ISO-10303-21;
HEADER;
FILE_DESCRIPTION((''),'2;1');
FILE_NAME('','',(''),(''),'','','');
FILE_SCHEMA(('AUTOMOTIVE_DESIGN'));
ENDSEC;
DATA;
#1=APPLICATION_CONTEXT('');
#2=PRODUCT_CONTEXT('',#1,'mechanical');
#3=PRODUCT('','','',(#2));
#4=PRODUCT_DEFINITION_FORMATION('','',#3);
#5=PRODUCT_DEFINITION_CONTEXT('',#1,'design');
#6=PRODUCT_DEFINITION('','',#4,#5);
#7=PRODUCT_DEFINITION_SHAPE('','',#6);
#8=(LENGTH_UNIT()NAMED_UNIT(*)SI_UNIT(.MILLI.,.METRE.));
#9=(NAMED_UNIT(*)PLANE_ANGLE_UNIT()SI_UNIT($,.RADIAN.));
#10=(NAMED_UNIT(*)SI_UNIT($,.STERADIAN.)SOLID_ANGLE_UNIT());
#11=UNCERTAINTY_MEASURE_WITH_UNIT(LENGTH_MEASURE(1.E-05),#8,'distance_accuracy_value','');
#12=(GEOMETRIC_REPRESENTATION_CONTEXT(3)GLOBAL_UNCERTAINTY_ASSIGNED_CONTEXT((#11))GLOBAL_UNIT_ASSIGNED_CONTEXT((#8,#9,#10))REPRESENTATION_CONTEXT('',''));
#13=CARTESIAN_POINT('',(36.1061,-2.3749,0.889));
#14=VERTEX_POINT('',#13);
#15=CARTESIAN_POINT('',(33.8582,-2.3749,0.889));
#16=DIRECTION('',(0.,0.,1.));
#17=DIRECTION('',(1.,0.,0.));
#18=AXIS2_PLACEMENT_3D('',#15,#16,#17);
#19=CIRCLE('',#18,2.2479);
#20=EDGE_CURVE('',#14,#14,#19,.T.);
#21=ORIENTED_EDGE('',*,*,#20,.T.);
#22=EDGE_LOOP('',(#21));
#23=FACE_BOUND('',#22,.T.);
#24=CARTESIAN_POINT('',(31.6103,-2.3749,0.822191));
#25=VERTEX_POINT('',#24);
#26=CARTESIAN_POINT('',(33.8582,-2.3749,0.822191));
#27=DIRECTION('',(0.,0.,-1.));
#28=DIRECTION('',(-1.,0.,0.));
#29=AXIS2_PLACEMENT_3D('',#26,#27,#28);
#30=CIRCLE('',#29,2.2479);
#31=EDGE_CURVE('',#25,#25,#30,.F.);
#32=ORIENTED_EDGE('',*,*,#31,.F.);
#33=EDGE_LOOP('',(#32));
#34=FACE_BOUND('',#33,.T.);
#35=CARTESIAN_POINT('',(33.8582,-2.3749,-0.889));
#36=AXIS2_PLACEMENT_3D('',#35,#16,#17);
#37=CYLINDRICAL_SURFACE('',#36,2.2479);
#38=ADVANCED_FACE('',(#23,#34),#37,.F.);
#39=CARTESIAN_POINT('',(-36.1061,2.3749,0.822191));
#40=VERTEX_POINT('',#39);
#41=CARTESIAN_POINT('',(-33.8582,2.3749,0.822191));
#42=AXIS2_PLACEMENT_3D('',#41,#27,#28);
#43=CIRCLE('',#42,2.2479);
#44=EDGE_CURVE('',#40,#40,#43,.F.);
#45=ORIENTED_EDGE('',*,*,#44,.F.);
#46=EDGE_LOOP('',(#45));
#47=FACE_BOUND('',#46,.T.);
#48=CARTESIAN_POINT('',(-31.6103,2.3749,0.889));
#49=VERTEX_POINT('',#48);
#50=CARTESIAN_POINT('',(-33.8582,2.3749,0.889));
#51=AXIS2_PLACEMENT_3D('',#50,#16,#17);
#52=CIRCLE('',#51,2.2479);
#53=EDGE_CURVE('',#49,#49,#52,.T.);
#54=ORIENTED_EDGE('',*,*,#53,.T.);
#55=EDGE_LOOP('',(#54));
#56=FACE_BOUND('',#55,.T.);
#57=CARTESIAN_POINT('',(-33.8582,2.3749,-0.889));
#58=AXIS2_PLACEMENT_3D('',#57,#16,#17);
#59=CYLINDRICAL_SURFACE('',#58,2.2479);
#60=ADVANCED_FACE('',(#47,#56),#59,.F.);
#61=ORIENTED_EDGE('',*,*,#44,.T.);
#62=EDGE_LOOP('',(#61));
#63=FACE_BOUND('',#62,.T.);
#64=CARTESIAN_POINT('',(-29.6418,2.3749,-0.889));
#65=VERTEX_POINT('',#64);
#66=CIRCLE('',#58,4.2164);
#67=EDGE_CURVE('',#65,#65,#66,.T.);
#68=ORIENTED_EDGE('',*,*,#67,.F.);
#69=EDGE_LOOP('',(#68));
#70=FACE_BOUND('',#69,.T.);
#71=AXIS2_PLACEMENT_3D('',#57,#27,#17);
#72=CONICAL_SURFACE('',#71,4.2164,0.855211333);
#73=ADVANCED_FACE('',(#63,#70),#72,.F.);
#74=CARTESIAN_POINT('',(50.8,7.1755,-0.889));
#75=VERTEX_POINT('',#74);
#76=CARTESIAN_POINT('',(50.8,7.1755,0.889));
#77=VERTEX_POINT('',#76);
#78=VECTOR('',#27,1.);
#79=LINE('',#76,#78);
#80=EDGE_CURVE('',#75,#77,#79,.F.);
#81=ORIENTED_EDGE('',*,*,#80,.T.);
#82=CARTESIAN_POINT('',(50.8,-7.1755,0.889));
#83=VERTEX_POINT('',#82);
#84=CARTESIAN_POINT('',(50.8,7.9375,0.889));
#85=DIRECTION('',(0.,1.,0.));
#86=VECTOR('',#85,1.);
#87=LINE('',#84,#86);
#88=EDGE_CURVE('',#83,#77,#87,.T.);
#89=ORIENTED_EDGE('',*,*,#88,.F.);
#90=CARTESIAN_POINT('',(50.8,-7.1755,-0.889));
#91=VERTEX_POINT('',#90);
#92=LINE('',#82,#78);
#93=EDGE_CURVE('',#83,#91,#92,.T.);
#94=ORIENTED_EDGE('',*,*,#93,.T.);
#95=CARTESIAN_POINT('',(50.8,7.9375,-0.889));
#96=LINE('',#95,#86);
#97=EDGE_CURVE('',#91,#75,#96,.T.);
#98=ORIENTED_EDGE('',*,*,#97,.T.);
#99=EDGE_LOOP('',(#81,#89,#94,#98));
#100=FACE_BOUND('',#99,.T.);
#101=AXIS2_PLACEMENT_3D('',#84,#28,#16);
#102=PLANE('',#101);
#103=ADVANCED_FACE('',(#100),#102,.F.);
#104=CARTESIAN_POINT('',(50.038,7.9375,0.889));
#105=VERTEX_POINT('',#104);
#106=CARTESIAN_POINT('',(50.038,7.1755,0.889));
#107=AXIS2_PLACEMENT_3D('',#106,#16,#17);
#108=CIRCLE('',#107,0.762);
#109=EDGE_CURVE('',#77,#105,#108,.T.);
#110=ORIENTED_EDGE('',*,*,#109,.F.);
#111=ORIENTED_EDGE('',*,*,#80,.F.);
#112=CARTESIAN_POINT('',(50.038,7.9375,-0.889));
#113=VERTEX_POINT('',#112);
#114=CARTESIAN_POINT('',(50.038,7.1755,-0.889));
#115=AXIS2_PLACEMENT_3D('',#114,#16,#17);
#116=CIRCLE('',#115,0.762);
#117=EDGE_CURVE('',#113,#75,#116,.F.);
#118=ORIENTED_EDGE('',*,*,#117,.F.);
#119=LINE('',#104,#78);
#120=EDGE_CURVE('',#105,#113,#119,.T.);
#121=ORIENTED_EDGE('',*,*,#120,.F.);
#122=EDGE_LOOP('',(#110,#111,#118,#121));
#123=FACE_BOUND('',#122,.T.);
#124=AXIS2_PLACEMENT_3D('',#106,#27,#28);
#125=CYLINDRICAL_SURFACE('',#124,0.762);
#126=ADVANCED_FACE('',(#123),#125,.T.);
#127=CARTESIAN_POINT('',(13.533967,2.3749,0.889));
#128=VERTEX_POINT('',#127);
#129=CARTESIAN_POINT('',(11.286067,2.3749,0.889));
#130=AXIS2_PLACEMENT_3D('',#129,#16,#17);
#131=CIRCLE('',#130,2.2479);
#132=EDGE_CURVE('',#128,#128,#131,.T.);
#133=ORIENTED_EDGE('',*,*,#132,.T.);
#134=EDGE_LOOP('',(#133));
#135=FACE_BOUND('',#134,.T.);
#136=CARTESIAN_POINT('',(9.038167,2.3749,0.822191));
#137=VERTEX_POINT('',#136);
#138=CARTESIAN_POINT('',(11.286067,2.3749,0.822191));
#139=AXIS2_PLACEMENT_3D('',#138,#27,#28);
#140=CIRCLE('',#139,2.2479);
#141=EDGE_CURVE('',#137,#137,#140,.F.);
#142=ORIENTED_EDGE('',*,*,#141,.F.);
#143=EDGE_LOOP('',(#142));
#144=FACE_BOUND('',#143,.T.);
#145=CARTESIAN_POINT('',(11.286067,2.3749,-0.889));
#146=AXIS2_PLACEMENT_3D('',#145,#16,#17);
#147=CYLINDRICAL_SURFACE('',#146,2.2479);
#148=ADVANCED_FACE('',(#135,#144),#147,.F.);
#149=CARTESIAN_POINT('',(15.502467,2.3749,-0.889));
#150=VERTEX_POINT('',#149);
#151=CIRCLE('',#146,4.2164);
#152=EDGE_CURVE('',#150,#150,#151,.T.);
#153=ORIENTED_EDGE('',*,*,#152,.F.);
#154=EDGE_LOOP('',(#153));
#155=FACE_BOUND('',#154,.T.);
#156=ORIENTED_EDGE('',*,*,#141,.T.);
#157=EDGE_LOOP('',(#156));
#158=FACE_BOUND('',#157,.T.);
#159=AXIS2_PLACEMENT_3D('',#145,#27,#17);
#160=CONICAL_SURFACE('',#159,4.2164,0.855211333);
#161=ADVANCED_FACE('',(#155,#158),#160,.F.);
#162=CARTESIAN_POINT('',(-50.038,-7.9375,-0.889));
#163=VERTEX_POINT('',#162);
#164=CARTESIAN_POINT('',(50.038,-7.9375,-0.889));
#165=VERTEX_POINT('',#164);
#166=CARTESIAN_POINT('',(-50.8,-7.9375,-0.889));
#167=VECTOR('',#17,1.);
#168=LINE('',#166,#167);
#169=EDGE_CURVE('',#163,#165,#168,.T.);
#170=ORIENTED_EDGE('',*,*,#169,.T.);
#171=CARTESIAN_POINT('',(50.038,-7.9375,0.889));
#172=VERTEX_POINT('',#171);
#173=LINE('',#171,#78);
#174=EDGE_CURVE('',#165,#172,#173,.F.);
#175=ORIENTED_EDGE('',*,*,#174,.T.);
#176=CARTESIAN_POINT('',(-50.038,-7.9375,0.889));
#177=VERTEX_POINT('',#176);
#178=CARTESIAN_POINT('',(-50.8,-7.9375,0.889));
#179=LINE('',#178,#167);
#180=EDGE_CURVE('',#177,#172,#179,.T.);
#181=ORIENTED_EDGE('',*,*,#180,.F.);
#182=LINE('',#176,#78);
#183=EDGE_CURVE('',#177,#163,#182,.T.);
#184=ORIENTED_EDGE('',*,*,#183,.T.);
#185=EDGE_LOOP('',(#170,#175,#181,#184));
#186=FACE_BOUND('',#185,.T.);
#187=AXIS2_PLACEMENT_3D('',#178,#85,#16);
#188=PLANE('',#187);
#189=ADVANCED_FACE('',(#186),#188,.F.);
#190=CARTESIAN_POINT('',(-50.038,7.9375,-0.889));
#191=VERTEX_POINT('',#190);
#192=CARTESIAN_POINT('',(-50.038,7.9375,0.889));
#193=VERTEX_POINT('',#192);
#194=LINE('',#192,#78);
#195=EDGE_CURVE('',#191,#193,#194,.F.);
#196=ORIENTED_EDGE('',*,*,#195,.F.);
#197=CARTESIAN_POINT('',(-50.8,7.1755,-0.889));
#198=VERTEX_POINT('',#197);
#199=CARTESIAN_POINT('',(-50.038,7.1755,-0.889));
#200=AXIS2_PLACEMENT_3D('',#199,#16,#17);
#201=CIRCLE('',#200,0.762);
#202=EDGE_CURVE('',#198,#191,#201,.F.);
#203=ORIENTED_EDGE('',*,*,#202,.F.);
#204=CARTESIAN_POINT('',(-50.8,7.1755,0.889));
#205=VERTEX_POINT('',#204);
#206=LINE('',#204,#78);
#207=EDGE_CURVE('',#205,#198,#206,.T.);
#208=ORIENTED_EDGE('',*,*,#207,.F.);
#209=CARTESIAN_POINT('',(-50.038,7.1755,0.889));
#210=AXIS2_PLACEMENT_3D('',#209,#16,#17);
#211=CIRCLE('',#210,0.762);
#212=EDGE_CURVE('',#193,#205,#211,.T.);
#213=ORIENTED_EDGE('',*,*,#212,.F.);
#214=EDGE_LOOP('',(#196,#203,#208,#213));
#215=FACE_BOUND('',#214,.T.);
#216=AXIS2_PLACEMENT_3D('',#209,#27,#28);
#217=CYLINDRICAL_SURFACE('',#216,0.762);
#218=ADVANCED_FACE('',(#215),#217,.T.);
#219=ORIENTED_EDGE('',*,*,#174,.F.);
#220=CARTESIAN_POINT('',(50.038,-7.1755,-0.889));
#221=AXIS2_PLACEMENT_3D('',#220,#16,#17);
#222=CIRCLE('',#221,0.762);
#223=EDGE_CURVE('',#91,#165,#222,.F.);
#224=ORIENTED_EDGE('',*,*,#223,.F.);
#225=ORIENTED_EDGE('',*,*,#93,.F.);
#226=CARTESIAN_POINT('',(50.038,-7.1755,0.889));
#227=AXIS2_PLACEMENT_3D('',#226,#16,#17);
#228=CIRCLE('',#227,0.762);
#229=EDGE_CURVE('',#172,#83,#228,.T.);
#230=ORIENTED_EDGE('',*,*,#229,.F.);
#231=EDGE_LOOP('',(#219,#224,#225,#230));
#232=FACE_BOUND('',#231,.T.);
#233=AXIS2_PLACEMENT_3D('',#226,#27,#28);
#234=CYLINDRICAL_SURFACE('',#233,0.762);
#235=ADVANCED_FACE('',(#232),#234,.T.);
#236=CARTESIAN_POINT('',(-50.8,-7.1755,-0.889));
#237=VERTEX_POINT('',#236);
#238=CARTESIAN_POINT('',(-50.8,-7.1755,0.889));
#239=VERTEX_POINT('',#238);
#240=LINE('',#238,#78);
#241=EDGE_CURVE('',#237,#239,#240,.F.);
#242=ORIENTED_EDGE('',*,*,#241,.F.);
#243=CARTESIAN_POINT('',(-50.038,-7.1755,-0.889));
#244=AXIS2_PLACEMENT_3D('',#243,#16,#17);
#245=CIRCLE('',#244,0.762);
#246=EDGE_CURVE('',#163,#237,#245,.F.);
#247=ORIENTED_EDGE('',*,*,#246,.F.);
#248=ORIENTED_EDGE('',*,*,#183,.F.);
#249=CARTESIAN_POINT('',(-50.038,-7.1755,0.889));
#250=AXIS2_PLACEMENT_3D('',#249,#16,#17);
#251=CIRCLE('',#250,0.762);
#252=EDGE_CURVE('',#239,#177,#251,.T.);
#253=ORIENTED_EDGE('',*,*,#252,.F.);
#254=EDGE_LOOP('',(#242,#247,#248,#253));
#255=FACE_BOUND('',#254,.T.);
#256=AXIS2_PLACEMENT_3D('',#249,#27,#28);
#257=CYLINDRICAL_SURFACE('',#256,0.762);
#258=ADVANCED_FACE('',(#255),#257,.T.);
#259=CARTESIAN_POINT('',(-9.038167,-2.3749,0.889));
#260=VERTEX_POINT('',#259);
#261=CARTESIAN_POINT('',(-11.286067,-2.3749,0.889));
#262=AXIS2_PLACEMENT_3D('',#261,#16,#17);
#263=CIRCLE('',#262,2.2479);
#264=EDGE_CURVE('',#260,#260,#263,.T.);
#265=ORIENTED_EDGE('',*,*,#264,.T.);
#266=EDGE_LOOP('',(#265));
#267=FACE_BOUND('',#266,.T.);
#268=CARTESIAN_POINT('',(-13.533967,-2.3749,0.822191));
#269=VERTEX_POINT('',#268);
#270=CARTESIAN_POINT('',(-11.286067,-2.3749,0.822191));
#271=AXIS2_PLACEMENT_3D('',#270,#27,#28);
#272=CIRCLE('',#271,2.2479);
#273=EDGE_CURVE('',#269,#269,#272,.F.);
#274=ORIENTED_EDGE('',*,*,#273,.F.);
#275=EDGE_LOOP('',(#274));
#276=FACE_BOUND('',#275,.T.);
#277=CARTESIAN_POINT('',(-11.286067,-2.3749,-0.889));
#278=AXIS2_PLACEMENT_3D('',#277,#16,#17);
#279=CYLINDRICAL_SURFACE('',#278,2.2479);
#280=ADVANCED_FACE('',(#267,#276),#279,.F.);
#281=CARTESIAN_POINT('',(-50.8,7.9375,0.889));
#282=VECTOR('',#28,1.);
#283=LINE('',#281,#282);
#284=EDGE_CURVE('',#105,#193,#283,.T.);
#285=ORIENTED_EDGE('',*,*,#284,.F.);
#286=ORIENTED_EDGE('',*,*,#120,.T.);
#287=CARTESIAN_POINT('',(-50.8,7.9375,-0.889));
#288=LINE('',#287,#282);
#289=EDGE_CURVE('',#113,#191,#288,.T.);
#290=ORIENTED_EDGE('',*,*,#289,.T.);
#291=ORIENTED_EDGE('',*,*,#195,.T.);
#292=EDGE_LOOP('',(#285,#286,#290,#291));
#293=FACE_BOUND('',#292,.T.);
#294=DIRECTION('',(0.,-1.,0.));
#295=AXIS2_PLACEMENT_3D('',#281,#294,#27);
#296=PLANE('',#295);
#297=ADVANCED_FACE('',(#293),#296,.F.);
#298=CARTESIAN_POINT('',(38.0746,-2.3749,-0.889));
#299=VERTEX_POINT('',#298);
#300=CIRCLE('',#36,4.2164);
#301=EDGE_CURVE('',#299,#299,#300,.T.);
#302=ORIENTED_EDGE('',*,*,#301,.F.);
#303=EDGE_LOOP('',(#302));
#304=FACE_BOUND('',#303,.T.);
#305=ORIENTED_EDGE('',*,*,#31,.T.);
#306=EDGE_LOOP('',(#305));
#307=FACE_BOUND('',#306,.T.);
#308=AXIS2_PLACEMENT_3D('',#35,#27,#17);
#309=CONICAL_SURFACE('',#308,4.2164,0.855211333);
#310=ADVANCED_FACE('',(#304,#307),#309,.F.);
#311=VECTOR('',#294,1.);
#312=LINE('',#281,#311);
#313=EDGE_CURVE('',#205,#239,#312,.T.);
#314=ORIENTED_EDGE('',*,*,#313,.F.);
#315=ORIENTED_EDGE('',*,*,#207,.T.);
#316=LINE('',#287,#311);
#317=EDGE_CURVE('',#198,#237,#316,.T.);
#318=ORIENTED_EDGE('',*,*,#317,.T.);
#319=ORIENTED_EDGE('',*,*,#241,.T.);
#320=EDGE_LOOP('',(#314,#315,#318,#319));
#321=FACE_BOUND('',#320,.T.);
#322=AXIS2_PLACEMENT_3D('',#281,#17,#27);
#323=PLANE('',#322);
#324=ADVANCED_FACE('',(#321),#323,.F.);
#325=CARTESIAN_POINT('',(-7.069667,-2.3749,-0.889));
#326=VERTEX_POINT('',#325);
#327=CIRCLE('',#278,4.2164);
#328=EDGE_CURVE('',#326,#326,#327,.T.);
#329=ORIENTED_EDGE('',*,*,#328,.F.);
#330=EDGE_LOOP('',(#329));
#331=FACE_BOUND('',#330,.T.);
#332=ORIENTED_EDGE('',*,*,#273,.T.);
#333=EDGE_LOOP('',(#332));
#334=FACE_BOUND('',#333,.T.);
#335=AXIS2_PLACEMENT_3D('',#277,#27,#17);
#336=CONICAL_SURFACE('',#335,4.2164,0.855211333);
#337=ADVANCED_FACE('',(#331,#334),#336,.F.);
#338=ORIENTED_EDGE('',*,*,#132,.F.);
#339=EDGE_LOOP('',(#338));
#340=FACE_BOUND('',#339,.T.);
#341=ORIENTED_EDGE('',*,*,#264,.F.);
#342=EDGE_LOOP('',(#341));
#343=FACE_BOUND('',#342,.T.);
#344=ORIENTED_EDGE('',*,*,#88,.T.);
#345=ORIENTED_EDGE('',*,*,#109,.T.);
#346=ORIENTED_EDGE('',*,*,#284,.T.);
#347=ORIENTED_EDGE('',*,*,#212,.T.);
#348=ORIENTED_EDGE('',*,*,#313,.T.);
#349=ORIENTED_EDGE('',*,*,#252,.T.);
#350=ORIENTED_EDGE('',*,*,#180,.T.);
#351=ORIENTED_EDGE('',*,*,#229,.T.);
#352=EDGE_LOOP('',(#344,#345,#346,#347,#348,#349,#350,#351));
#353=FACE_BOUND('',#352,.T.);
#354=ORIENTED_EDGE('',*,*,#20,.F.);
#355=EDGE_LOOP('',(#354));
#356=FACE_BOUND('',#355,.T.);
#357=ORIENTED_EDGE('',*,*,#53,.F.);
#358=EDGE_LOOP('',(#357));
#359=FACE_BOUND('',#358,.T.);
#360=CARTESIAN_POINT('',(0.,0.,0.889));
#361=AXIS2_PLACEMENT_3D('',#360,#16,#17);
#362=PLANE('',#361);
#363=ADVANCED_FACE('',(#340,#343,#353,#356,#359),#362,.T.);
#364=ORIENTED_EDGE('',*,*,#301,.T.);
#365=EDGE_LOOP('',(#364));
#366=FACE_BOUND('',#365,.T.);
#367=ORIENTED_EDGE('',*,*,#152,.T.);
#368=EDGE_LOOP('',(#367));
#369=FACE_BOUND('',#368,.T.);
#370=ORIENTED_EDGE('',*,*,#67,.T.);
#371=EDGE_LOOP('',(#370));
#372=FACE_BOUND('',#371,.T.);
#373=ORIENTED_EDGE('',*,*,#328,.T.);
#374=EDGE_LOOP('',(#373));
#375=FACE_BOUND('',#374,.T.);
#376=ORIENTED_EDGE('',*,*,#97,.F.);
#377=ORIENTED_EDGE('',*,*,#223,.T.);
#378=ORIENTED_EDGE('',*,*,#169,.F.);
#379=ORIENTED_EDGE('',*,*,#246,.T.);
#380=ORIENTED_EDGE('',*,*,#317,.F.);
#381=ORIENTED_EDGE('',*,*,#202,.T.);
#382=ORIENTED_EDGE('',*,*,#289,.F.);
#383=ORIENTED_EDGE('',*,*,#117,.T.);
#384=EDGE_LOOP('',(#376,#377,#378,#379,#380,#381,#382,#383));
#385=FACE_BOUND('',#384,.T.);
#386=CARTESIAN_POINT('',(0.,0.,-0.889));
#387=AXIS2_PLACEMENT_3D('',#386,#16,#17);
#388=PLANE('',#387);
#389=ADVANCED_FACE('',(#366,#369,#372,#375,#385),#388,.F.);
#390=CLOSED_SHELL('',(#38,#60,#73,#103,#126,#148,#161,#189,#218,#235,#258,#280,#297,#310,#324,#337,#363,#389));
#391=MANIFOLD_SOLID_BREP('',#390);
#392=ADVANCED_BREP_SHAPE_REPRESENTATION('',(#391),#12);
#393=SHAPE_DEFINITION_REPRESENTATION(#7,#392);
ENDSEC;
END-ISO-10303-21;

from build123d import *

# Parameters (mm, degrees)
BOSS_EXTRUDE1_DEPTH      = 0.889
BOSS_EXTRUDE1_DEPTH_BACK = 0.889
SKETCH4_W                = 101.6
SKETCH4_H                = 15.875
SKETCH5_R                = 2.2479
CUT_EXTRUDE1_DEPTH       = 52.424062726
SKETCH6_R                = 4.2164
CUT_EXTRUDE2_DEPTH       = 52.447110611
CUT_EXTRUDE2_TAPER       = 49
FILLET1_R                = 0.762


# Read off the part's stored shape, not the designer's step: Sketch-Pattern1
with BuildPart() as part:
    # Sketch4 → Boss-Extrude1 (new, two sides: drawn at the far end of the back side and taken through both)
    with BuildSketch(Plane.XY.offset(-BOSS_EXTRUDE1_DEPTH_BACK)):
        Rectangle(SKETCH4_W, SKETCH4_H)
    extrude(amount=BOSS_EXTRUDE1_DEPTH + BOSS_EXTRUDE1_DEPTH_BACK)

    # Sketch5 → Cut-Extrude1 (cut, symmetric)
    with BuildSketch(Plane.XY):
        with Locations((-33.8582, 2.3749)):
            Circle(SKETCH5_R)
    extrude(amount=CUT_EXTRUDE1_DEPTH, both=True, mode=Mode.SUBTRACT)

    # Sketch6 → Cut-Extrude2 (cut, through all)
    with BuildSketch(Plane.XY.offset(-0.889)):
        with Locations((-33.8582, 2.3749)):
            Circle(SKETCH6_R)
    extrude(amount=CUT_EXTRUDE2_DEPTH, taper=CUT_EXTRUDE2_TAPER, mode=Mode.SUBTRACT)

    # Sketch-Pattern1 outline → Sketch-Pattern1 (revolve, cut)
    with BuildSketch(Plane(origin=(11.286066667, 2.3749, 0), x_dir=(1, 0, 0), z_dir=(0, -1, 0))):
        Polygon((0, -0.889), (4.2164, -0.889), (2.2479, 0.822190943), (2.2479, 0.889), (0, 0.889), align=None)
    revolve(axis=Axis((11.286066667, 2.3749, 0), (0, 0, 1)), mode=Mode.SUBTRACT)

    # Sketch-Pattern1 2 outline → Sketch-Pattern1 2 (revolve, cut)
    with BuildSketch(Plane(origin=(33.8582, -2.3749, 0), x_dir=(1, 0, 0), z_dir=(0, -1, 0))):
        Polygon((0, -0.889), (4.2164, -0.889), (2.2479, 0.822190943), (2.2479, 0.889), (0, 0.889), align=None)
    revolve(axis=Axis((33.8582, -2.3749, 0), (0, 0, 1)), mode=Mode.SUBTRACT)

    # Sketch-Pattern1 3 outline → Sketch-Pattern1 3 (revolve, cut)
    with BuildSketch(Plane(origin=(-11.286066667, -2.3749, 0), x_dir=(1, 0, 0), z_dir=(0, -1, 0))):
        Polygon((0, -0.889), (4.2164, -0.889), (2.2479, 0.822190943), (2.2479, 0.889), (0, 0.889), align=None)
    revolve(axis=Axis((-11.286066667, -2.3749, 0), (0, 0, 1)), mode=Mode.SUBTRACT)

    # Fillet1
    fillet1_edges = [part.edges().sort_by_distance(p)[0] for p in [
        (-50.8, 7.9375, 0),
        (50.8, 7.9375, 0),
        (50.8, -7.9375, 0),
        (-50.8, -7.9375, 0),
    ]]
    fillet(fillet1_edges, radius=FILLET1_R)


solid = part.part
